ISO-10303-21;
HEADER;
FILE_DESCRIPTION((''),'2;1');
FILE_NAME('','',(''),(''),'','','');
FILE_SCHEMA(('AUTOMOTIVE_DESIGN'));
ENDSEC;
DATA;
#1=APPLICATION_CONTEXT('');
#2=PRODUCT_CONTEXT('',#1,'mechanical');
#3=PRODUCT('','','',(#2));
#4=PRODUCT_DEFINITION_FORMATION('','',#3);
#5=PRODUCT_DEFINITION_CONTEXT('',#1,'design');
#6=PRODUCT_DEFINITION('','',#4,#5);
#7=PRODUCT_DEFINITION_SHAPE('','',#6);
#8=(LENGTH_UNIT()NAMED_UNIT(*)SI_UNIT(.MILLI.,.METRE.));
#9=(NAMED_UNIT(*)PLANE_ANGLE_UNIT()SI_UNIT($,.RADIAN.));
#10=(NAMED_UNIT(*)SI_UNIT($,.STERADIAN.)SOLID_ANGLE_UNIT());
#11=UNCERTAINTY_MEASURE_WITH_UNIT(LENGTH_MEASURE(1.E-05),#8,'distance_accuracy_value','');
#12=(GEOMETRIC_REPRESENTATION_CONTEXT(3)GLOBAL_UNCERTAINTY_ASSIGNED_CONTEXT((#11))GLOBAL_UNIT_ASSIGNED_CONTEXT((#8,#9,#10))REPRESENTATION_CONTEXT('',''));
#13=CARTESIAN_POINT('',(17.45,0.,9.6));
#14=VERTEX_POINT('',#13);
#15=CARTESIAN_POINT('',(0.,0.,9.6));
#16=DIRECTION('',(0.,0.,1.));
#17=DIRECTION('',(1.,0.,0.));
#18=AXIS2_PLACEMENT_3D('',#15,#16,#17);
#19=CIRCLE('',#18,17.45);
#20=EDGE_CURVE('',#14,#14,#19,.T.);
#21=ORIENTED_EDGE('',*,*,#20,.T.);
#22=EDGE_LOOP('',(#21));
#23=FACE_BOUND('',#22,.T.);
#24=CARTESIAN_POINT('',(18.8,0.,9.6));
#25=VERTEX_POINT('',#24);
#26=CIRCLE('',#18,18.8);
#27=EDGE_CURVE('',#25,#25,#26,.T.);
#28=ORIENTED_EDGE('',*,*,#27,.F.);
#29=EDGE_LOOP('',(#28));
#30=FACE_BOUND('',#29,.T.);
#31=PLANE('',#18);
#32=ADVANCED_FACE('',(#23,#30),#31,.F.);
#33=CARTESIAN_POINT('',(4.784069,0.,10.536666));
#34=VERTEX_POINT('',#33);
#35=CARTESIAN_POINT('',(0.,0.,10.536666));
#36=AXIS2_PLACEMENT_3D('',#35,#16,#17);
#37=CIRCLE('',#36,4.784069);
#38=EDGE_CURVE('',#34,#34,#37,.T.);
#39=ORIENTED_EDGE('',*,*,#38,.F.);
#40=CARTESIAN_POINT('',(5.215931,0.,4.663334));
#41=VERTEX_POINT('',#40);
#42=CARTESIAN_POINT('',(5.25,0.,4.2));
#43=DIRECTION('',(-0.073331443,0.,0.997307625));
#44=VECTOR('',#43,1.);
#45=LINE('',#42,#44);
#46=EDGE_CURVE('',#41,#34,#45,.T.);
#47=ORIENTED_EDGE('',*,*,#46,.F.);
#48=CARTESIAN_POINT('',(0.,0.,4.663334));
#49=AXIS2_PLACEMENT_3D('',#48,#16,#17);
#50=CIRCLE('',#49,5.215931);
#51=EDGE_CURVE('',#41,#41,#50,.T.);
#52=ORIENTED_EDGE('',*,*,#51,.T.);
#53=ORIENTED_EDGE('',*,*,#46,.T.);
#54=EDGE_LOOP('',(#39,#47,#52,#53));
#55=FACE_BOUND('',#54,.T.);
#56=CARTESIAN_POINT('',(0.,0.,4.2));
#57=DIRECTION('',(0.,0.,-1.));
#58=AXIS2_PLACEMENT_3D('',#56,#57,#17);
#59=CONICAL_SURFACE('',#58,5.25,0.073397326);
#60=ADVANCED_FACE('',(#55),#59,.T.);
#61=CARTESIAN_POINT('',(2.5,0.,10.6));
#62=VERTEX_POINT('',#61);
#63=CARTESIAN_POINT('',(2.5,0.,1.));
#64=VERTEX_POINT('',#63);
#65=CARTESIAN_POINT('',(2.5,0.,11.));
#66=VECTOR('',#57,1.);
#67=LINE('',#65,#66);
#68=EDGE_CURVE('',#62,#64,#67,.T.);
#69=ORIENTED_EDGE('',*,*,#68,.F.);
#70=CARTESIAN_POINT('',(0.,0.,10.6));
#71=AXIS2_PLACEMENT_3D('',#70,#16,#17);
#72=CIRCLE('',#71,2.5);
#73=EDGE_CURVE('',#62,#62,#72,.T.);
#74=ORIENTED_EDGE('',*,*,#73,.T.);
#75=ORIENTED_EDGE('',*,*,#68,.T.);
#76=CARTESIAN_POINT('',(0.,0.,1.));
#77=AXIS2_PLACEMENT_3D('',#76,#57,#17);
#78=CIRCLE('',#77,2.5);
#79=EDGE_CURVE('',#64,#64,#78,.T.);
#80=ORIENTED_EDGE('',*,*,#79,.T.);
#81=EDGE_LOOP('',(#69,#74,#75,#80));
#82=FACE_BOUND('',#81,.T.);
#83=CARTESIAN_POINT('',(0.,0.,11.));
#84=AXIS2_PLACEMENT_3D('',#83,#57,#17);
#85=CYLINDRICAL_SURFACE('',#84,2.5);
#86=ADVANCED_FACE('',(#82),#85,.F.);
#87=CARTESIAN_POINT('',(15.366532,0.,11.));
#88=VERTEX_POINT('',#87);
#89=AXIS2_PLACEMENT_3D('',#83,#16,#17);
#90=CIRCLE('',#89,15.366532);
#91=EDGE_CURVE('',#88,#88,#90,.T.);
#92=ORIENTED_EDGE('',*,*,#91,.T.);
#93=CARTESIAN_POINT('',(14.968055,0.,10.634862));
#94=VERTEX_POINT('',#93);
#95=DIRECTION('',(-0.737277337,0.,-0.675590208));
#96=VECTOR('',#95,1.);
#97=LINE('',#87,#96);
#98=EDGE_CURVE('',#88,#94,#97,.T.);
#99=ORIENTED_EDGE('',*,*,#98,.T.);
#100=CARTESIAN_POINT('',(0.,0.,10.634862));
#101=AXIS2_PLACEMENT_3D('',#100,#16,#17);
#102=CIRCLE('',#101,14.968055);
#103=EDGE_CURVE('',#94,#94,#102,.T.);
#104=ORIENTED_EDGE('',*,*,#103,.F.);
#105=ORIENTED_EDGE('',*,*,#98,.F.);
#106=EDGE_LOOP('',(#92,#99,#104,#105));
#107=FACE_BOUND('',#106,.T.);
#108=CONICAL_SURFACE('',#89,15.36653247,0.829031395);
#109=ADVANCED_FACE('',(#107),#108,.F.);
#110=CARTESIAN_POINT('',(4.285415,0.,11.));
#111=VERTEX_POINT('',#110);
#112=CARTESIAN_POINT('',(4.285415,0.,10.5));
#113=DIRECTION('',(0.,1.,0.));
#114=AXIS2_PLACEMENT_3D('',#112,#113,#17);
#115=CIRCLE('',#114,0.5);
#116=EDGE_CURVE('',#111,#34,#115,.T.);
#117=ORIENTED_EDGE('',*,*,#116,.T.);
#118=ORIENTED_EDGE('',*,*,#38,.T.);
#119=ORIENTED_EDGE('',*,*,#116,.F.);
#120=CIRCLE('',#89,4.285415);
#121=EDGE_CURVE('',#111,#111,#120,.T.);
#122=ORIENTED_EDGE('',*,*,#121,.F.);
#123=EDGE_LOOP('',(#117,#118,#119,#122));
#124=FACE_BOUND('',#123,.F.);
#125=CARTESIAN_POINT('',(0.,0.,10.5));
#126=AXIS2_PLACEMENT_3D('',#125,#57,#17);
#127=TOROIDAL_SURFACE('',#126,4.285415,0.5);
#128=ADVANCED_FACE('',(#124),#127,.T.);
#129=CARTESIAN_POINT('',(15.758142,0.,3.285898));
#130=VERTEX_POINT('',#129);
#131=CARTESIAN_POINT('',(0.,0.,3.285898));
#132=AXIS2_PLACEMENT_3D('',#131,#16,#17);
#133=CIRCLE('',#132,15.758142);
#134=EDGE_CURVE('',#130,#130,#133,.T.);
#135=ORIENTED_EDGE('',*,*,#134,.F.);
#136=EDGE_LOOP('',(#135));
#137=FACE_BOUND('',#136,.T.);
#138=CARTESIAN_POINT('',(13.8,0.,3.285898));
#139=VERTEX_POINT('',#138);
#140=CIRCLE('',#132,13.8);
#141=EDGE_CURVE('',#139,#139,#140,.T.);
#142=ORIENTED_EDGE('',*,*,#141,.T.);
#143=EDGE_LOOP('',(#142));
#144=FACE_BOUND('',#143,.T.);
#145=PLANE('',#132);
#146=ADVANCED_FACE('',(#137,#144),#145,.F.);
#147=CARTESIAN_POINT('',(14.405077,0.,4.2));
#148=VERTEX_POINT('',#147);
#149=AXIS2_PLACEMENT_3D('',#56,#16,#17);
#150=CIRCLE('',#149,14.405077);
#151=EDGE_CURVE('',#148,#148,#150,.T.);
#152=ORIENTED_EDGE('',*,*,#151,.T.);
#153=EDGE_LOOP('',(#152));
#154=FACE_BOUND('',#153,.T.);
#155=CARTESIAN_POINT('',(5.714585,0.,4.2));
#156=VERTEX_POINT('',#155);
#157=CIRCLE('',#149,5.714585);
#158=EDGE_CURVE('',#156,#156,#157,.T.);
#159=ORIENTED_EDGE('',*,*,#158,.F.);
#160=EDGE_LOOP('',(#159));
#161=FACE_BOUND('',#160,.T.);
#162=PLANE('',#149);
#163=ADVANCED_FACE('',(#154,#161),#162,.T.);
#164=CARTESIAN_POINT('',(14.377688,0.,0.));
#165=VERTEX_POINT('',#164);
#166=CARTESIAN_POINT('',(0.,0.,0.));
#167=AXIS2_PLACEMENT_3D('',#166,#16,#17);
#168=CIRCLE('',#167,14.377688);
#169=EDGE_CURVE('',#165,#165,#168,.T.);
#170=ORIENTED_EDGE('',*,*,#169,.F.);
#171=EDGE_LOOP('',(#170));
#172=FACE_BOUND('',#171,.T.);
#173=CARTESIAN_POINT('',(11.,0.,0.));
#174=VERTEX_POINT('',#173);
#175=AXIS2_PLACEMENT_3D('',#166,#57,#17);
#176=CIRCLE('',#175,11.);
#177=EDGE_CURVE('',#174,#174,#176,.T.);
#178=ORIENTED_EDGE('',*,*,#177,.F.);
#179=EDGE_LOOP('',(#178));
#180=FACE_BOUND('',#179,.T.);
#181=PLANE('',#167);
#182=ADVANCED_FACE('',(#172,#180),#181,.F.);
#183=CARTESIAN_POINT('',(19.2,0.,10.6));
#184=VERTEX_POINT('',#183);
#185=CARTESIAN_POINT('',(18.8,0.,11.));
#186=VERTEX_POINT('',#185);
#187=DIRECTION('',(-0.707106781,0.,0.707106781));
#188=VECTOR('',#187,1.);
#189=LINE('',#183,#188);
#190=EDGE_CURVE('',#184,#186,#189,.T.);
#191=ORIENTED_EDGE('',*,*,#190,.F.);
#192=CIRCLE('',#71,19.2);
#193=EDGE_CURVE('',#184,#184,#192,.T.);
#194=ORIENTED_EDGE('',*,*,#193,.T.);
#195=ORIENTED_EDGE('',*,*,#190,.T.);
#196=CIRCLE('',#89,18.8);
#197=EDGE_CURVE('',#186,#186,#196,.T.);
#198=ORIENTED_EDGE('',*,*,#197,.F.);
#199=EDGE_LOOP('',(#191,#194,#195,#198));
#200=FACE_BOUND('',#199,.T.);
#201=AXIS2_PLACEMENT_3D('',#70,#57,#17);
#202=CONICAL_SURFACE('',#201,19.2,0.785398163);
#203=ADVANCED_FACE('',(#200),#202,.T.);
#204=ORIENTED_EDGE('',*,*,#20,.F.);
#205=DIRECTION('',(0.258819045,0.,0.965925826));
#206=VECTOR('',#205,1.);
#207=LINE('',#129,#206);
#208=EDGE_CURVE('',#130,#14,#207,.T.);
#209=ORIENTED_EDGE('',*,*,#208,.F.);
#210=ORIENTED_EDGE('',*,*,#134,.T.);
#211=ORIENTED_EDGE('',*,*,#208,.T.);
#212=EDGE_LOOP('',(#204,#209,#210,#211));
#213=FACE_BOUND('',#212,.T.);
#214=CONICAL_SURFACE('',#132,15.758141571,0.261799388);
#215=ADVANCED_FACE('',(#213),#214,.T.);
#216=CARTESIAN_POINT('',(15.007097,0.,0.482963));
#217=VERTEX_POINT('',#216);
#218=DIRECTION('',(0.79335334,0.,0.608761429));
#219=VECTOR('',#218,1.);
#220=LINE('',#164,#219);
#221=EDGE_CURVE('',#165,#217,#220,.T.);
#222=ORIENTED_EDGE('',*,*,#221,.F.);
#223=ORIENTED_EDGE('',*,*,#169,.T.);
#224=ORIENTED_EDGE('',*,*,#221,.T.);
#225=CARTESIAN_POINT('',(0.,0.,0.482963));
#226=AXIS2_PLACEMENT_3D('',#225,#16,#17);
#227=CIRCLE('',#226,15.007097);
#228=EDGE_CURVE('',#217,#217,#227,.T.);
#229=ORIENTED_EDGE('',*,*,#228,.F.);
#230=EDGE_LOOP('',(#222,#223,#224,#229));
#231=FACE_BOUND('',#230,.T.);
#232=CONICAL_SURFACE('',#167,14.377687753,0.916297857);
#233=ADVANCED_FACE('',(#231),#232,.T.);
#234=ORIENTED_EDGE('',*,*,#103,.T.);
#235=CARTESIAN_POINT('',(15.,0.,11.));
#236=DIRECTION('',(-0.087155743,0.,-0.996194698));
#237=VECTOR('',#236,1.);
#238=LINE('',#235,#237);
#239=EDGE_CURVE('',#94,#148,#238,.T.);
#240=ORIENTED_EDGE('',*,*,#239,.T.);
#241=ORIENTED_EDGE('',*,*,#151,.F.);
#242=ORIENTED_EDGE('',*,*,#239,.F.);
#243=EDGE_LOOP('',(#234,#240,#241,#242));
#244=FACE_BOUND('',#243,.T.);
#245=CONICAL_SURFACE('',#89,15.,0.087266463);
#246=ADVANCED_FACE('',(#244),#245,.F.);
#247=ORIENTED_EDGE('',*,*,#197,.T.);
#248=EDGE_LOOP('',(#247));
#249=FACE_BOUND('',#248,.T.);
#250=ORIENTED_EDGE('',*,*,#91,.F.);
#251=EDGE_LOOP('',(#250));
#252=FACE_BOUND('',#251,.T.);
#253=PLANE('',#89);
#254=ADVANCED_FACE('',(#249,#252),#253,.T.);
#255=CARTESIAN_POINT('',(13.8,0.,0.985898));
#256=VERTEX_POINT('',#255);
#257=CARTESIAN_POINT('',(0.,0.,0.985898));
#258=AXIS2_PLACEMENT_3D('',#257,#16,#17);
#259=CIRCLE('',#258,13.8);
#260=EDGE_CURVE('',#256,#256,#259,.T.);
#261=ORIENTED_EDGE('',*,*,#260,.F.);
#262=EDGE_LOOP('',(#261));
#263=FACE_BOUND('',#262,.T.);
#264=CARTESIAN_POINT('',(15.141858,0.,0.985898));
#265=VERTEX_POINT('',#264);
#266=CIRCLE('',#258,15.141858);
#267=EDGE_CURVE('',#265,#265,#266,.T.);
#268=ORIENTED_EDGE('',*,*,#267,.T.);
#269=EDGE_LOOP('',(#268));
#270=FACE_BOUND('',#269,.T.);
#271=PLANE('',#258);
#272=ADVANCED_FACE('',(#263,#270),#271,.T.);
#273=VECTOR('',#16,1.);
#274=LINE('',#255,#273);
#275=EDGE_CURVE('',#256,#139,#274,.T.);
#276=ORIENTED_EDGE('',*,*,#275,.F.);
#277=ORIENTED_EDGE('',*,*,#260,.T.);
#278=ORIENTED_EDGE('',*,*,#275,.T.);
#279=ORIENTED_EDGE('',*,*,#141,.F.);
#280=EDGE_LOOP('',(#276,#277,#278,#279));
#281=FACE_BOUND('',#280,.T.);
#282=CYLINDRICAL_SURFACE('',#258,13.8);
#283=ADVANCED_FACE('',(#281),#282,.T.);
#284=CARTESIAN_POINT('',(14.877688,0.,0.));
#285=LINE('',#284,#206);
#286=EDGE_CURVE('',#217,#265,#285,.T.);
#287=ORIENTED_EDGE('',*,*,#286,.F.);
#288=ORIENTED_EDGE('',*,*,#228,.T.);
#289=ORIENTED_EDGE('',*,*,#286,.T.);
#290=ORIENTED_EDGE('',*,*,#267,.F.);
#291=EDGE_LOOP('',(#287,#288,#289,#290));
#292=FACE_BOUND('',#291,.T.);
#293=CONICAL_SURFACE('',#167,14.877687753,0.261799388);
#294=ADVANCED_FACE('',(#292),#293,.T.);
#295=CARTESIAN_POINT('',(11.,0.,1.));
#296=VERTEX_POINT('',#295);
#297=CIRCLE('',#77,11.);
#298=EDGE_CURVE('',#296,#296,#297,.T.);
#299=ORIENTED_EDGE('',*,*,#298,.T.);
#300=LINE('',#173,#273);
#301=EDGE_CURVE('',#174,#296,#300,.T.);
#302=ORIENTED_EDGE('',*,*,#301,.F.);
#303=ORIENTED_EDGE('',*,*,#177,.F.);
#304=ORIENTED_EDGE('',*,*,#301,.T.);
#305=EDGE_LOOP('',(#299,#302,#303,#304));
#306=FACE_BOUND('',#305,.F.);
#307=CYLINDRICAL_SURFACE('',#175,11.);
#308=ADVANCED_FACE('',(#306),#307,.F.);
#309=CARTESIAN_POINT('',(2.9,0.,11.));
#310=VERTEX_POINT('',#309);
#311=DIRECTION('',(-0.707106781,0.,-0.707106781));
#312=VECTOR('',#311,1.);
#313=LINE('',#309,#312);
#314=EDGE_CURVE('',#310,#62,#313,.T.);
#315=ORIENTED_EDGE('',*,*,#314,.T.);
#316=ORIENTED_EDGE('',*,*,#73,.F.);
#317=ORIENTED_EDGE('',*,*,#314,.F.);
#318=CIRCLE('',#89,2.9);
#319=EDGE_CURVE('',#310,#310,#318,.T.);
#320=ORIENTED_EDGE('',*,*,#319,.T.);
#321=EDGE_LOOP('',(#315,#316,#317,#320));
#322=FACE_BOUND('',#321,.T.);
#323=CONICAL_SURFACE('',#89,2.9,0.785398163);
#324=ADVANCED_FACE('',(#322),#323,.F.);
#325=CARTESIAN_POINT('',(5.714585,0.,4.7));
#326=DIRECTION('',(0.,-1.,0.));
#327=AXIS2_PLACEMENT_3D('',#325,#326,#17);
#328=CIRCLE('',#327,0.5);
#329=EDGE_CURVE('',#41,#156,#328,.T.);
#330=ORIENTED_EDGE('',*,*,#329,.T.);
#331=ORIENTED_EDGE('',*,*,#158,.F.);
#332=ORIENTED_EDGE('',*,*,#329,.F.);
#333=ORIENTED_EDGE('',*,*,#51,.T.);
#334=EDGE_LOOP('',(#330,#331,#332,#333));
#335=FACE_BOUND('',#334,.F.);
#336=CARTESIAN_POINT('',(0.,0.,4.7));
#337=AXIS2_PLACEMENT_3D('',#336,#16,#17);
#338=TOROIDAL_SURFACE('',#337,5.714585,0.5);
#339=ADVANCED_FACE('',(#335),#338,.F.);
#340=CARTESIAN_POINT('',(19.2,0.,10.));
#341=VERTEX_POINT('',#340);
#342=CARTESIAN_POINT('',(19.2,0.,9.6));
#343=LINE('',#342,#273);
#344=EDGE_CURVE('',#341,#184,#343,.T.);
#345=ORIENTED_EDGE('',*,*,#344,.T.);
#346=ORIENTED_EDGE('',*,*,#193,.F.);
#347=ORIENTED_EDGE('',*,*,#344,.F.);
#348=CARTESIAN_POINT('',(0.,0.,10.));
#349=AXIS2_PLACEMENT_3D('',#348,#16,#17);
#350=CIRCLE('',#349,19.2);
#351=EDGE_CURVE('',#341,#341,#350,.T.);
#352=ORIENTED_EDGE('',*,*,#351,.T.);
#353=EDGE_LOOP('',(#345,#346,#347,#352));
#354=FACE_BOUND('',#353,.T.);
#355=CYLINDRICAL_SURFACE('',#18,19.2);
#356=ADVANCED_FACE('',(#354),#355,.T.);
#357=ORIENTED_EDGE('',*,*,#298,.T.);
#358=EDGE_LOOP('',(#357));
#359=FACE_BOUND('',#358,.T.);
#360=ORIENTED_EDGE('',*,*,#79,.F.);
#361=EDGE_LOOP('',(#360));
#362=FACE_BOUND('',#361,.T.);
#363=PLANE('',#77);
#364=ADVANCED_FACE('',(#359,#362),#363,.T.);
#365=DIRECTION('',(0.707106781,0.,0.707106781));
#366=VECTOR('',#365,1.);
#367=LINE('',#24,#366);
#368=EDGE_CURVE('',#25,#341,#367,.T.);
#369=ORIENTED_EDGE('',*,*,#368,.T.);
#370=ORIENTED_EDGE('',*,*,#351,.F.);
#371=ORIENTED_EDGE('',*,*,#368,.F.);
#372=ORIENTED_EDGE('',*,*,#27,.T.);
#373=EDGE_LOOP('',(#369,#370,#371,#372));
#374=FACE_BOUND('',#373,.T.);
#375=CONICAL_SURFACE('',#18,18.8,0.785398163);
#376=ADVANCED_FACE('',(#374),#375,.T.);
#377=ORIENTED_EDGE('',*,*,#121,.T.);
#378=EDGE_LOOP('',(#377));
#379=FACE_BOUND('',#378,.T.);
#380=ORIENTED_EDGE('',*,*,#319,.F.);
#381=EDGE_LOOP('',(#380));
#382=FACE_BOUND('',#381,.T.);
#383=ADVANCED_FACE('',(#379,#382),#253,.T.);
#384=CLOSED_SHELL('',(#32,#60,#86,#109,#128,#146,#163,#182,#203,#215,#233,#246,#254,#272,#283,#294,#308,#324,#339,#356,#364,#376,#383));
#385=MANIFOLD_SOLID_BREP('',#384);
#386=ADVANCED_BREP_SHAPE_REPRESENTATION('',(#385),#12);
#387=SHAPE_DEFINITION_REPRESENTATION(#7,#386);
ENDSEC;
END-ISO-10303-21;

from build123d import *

# Parameters (mm, degrees)
F3_R     = 0.5
F4_R     = 11
F5_DEPTH = 1
F6_SIZE  = 0.5


# Not quite as in the source:
# - a fillet or chamfer that OpenCascade refuses, or shapes differently, is made with other operations: its cross-section is extruded or revolved along the edge and cut away or added


with BuildPart() as f1:
    # F0 (on Front) → F1 (revolve)
    with BuildSketch(Plane.XZ):
        Polygon((4.75, 11), (2.5, 11), (2.5, 0), (14.8776877527, 0), (15.1418584287, 0.9858983849), (13.8, 0.9858983849), (13.8, 3.2858983849), (15.7581415713, 3.2858983849), (17.45, 9.6), (19.2, 9.6), (19.2, 11), (15, 11), (14.405077088, 4.2), (5.25, 4.2), align=None)
    revolve(axis=Axis((0, 0, 5.5), (0, 0, 1)))

    # F2: chamfer of 0.4 on 4 edges, made by hand

    # F2_s1 → F2_t2 (revolve, cut)
    with BuildSketch(Plane.XZ):
        Polygon((2.9, 11), (2.5, 10.6), (2.5, 11), align=None)
    revolve(axis=Axis((0, 0, 11), (0, 0, 1)), mode=Mode.SUBTRACT)

    # F2_s3 → F2_t4 (revolve, cut)
    with BuildSketch(Plane.XZ):
        Polygon((19.2, 10.6), (18.8, 11), (19.2, 11), align=None)
    revolve(axis=Axis((0, 0, 11), (0, 0, 1)), mode=Mode.SUBTRACT)

    # F2_s5 → F2_t6 (revolve, cut)
    with BuildSketch(Plane.XZ):
        Polygon((15.3665324696, 11), (14.9680545904, 10.6348622971), (15, 11), align=None)
    revolve(axis=Axis((0, 0, 11), (0, 0, 1)), mode=Mode.SUBTRACT)

    # F2_s7 → F2_t8 (revolve, cut)
    with BuildSketch(Plane.XZ):
        Polygon((18.8, 9.6), (19.2, 10), (19.2, 9.6), align=None)
    revolve(axis=Axis((0, 0, 9.6), (0, 0, 1)), mode=Mode.SUBTRACT)

    # F3
    f3_edges = [f1.edges().sort_by_distance(p)[0] for p in [
        (-5.25, 0, 4.2),
        (-4.75, 0, 11),
        (5, 0, 7.6),
    ]]
    fillet(f3_edges, radius=F3_R)

    # F4 (on face) → F5 (cut)
    with BuildSketch(Plane(origin=(0, 0, 0), x_dir=(1, 0, 0), z_dir=(0, 0, -1))):
        Circle(F4_R)
    extrude(amount=-F5_DEPTH, mode=Mode.SUBTRACT)

    # F6
    f6_edges = [f1.edges().sort_by_distance(p)[0] for p in [
        (-14.877688, 0, 0),
    ]]
    chamfer(f6_edges, length=F6_SIZE)


solid = f1.part
